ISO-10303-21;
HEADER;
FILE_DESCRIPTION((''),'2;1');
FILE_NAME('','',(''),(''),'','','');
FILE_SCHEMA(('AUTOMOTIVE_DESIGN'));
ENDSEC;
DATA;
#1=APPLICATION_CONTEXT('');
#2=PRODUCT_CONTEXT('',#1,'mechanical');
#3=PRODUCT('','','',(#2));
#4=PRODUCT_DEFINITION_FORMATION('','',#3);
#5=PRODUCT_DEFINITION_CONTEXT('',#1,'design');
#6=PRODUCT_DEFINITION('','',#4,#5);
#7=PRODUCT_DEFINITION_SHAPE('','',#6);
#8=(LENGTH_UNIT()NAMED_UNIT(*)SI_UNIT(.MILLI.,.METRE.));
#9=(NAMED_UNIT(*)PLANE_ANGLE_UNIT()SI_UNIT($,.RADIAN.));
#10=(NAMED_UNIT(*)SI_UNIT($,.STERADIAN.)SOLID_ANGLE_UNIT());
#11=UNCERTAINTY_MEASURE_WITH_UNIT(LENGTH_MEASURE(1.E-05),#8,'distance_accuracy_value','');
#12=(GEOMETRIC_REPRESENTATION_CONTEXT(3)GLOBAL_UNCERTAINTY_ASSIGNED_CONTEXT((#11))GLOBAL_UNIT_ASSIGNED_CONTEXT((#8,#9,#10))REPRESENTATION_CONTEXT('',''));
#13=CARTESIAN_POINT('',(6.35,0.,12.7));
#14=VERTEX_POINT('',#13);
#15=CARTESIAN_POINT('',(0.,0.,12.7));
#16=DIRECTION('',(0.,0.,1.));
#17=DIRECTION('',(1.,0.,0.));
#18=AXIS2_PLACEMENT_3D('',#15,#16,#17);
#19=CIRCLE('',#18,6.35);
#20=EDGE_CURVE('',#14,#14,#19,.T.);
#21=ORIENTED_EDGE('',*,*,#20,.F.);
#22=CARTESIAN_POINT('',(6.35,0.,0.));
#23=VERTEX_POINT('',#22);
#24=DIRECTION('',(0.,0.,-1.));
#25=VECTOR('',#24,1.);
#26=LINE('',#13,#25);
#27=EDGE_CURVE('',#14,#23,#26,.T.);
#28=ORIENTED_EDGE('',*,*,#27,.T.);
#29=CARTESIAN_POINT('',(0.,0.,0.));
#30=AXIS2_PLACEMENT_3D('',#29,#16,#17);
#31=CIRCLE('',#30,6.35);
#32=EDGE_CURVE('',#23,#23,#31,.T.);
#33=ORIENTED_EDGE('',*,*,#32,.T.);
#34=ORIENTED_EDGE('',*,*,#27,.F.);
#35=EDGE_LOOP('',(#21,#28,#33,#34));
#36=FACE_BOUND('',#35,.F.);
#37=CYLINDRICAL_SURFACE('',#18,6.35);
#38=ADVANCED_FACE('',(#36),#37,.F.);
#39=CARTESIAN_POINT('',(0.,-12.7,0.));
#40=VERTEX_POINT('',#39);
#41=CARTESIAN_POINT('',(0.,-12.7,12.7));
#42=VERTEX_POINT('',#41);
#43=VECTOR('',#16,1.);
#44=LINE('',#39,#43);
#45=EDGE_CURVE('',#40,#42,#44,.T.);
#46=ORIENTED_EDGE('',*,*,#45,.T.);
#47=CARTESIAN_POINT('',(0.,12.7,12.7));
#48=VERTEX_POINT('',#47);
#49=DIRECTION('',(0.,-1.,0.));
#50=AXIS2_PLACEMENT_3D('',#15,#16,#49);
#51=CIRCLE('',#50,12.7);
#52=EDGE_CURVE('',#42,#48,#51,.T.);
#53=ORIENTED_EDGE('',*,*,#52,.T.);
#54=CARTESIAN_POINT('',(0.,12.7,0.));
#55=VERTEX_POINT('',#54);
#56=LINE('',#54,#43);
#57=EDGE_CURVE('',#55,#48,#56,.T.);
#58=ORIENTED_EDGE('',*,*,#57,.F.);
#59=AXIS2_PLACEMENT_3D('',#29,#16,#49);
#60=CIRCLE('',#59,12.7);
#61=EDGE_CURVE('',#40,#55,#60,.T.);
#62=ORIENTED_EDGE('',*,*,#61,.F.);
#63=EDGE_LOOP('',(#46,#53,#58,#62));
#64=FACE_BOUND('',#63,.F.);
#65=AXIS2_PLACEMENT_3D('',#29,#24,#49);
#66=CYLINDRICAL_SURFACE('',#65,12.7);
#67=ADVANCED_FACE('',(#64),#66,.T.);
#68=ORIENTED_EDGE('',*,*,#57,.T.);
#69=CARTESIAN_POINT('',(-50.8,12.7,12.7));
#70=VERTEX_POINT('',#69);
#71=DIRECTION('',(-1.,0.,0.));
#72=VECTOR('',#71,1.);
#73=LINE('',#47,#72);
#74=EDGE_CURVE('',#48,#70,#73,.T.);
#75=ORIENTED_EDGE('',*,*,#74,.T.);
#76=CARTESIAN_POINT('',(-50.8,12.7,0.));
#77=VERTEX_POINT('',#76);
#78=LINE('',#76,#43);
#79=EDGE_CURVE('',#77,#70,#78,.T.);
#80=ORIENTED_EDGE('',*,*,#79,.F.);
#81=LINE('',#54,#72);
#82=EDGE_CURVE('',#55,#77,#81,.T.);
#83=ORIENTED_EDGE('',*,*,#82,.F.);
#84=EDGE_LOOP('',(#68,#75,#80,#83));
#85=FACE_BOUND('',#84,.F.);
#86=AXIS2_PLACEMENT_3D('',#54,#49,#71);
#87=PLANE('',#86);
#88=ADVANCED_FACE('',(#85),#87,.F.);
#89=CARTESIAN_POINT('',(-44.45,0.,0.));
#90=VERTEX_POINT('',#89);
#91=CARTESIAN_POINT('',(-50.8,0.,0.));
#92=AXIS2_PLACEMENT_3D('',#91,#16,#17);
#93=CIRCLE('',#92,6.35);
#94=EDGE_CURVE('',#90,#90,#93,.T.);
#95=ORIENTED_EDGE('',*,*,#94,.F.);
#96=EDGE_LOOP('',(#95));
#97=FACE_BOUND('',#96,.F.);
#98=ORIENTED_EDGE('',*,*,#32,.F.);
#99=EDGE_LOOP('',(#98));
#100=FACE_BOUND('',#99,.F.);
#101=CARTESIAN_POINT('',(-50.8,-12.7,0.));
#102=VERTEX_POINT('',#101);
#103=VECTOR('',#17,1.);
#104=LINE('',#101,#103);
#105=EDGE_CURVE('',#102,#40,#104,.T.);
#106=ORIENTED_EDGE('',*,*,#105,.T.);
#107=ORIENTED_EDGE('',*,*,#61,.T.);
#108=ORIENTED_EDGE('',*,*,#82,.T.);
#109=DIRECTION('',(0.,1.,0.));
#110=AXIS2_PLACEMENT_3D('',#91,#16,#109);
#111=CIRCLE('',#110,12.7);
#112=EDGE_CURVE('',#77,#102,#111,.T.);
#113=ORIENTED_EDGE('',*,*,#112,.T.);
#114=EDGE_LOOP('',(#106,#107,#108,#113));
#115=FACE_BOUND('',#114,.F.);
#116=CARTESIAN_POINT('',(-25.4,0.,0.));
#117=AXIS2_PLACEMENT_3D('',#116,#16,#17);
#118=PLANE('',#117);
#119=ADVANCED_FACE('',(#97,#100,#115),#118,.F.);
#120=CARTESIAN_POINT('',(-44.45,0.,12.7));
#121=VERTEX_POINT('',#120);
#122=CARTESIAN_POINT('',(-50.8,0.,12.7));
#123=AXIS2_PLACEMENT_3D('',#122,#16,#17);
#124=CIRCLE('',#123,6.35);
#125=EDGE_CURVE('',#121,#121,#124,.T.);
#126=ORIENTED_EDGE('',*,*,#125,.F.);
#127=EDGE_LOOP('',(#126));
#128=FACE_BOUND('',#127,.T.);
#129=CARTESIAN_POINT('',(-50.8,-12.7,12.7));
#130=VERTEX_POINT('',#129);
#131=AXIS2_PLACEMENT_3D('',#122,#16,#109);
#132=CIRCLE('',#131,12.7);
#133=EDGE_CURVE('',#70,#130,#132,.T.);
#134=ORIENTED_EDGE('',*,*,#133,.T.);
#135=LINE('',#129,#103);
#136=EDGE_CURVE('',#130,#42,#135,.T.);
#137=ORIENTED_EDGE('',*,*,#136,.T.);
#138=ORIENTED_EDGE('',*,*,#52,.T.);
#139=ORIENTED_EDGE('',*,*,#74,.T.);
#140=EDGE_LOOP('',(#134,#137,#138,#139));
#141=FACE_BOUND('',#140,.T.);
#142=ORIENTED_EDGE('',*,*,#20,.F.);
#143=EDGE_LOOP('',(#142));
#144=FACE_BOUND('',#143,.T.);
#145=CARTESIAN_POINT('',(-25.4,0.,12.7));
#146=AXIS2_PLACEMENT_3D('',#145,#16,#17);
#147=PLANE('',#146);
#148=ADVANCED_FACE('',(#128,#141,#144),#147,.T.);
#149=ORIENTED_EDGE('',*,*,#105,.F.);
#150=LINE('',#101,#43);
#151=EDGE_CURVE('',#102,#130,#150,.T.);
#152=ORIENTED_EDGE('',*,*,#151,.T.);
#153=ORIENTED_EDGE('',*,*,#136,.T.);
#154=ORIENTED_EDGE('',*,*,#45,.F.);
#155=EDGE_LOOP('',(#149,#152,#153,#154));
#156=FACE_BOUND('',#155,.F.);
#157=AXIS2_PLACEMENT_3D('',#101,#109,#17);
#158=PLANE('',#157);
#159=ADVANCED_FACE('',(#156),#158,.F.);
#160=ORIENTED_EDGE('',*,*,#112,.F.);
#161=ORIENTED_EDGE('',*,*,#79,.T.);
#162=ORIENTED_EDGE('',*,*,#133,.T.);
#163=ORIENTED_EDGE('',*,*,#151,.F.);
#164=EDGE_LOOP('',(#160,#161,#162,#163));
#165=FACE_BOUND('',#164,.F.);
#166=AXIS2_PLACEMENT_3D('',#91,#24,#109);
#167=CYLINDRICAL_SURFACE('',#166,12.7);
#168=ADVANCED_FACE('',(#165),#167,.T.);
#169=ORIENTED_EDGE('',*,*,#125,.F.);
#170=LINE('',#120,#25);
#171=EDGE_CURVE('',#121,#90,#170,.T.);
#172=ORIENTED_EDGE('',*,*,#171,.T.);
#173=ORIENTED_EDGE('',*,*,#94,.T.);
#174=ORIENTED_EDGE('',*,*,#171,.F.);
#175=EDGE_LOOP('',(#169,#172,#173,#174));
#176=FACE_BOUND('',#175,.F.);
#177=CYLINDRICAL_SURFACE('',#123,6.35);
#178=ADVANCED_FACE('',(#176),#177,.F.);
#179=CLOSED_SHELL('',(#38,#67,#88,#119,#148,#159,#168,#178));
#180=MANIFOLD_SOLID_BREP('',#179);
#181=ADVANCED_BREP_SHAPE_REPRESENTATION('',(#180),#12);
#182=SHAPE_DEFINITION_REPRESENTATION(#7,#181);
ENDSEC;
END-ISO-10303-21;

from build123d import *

# Parameters (mm, degrees)
F2_DEPTH = 12.7
F3_R     = 6.35
F4_DEPTH = 12.701


# Not quite as in the source:
# - a variable given as a bare number and used for a length is read in inches; the dataset says mm whatever the document's units were


with BuildPart() as f2:
    # F1 (on Top) → F2 (new body)
    with BuildSketch(Plane.XY):
        with BuildLine():
            Line((-50.8, -12.7), (0, -12.7))
            ThreePointArc((0, -12.7), (12.7, 0), (0, 12.7))
            Line((0, 12.7), (-50.8, 12.7))
            ThreePointArc((-50.8, 12.7), (-63.5, 0), (-50.8, -12.7))
        make_face()
    extrude(amount=F2_DEPTH)

    # F3 (on face) → F4 (cut, through all)
    with BuildSketch(Plane.XY.offset(12.7)):
        Circle(F3_R)
        with Locations((-50.8, 0)):
            Circle(F3_R)
    extrude(amount=-F4_DEPTH, mode=Mode.SUBTRACT)


solid = f2.part
